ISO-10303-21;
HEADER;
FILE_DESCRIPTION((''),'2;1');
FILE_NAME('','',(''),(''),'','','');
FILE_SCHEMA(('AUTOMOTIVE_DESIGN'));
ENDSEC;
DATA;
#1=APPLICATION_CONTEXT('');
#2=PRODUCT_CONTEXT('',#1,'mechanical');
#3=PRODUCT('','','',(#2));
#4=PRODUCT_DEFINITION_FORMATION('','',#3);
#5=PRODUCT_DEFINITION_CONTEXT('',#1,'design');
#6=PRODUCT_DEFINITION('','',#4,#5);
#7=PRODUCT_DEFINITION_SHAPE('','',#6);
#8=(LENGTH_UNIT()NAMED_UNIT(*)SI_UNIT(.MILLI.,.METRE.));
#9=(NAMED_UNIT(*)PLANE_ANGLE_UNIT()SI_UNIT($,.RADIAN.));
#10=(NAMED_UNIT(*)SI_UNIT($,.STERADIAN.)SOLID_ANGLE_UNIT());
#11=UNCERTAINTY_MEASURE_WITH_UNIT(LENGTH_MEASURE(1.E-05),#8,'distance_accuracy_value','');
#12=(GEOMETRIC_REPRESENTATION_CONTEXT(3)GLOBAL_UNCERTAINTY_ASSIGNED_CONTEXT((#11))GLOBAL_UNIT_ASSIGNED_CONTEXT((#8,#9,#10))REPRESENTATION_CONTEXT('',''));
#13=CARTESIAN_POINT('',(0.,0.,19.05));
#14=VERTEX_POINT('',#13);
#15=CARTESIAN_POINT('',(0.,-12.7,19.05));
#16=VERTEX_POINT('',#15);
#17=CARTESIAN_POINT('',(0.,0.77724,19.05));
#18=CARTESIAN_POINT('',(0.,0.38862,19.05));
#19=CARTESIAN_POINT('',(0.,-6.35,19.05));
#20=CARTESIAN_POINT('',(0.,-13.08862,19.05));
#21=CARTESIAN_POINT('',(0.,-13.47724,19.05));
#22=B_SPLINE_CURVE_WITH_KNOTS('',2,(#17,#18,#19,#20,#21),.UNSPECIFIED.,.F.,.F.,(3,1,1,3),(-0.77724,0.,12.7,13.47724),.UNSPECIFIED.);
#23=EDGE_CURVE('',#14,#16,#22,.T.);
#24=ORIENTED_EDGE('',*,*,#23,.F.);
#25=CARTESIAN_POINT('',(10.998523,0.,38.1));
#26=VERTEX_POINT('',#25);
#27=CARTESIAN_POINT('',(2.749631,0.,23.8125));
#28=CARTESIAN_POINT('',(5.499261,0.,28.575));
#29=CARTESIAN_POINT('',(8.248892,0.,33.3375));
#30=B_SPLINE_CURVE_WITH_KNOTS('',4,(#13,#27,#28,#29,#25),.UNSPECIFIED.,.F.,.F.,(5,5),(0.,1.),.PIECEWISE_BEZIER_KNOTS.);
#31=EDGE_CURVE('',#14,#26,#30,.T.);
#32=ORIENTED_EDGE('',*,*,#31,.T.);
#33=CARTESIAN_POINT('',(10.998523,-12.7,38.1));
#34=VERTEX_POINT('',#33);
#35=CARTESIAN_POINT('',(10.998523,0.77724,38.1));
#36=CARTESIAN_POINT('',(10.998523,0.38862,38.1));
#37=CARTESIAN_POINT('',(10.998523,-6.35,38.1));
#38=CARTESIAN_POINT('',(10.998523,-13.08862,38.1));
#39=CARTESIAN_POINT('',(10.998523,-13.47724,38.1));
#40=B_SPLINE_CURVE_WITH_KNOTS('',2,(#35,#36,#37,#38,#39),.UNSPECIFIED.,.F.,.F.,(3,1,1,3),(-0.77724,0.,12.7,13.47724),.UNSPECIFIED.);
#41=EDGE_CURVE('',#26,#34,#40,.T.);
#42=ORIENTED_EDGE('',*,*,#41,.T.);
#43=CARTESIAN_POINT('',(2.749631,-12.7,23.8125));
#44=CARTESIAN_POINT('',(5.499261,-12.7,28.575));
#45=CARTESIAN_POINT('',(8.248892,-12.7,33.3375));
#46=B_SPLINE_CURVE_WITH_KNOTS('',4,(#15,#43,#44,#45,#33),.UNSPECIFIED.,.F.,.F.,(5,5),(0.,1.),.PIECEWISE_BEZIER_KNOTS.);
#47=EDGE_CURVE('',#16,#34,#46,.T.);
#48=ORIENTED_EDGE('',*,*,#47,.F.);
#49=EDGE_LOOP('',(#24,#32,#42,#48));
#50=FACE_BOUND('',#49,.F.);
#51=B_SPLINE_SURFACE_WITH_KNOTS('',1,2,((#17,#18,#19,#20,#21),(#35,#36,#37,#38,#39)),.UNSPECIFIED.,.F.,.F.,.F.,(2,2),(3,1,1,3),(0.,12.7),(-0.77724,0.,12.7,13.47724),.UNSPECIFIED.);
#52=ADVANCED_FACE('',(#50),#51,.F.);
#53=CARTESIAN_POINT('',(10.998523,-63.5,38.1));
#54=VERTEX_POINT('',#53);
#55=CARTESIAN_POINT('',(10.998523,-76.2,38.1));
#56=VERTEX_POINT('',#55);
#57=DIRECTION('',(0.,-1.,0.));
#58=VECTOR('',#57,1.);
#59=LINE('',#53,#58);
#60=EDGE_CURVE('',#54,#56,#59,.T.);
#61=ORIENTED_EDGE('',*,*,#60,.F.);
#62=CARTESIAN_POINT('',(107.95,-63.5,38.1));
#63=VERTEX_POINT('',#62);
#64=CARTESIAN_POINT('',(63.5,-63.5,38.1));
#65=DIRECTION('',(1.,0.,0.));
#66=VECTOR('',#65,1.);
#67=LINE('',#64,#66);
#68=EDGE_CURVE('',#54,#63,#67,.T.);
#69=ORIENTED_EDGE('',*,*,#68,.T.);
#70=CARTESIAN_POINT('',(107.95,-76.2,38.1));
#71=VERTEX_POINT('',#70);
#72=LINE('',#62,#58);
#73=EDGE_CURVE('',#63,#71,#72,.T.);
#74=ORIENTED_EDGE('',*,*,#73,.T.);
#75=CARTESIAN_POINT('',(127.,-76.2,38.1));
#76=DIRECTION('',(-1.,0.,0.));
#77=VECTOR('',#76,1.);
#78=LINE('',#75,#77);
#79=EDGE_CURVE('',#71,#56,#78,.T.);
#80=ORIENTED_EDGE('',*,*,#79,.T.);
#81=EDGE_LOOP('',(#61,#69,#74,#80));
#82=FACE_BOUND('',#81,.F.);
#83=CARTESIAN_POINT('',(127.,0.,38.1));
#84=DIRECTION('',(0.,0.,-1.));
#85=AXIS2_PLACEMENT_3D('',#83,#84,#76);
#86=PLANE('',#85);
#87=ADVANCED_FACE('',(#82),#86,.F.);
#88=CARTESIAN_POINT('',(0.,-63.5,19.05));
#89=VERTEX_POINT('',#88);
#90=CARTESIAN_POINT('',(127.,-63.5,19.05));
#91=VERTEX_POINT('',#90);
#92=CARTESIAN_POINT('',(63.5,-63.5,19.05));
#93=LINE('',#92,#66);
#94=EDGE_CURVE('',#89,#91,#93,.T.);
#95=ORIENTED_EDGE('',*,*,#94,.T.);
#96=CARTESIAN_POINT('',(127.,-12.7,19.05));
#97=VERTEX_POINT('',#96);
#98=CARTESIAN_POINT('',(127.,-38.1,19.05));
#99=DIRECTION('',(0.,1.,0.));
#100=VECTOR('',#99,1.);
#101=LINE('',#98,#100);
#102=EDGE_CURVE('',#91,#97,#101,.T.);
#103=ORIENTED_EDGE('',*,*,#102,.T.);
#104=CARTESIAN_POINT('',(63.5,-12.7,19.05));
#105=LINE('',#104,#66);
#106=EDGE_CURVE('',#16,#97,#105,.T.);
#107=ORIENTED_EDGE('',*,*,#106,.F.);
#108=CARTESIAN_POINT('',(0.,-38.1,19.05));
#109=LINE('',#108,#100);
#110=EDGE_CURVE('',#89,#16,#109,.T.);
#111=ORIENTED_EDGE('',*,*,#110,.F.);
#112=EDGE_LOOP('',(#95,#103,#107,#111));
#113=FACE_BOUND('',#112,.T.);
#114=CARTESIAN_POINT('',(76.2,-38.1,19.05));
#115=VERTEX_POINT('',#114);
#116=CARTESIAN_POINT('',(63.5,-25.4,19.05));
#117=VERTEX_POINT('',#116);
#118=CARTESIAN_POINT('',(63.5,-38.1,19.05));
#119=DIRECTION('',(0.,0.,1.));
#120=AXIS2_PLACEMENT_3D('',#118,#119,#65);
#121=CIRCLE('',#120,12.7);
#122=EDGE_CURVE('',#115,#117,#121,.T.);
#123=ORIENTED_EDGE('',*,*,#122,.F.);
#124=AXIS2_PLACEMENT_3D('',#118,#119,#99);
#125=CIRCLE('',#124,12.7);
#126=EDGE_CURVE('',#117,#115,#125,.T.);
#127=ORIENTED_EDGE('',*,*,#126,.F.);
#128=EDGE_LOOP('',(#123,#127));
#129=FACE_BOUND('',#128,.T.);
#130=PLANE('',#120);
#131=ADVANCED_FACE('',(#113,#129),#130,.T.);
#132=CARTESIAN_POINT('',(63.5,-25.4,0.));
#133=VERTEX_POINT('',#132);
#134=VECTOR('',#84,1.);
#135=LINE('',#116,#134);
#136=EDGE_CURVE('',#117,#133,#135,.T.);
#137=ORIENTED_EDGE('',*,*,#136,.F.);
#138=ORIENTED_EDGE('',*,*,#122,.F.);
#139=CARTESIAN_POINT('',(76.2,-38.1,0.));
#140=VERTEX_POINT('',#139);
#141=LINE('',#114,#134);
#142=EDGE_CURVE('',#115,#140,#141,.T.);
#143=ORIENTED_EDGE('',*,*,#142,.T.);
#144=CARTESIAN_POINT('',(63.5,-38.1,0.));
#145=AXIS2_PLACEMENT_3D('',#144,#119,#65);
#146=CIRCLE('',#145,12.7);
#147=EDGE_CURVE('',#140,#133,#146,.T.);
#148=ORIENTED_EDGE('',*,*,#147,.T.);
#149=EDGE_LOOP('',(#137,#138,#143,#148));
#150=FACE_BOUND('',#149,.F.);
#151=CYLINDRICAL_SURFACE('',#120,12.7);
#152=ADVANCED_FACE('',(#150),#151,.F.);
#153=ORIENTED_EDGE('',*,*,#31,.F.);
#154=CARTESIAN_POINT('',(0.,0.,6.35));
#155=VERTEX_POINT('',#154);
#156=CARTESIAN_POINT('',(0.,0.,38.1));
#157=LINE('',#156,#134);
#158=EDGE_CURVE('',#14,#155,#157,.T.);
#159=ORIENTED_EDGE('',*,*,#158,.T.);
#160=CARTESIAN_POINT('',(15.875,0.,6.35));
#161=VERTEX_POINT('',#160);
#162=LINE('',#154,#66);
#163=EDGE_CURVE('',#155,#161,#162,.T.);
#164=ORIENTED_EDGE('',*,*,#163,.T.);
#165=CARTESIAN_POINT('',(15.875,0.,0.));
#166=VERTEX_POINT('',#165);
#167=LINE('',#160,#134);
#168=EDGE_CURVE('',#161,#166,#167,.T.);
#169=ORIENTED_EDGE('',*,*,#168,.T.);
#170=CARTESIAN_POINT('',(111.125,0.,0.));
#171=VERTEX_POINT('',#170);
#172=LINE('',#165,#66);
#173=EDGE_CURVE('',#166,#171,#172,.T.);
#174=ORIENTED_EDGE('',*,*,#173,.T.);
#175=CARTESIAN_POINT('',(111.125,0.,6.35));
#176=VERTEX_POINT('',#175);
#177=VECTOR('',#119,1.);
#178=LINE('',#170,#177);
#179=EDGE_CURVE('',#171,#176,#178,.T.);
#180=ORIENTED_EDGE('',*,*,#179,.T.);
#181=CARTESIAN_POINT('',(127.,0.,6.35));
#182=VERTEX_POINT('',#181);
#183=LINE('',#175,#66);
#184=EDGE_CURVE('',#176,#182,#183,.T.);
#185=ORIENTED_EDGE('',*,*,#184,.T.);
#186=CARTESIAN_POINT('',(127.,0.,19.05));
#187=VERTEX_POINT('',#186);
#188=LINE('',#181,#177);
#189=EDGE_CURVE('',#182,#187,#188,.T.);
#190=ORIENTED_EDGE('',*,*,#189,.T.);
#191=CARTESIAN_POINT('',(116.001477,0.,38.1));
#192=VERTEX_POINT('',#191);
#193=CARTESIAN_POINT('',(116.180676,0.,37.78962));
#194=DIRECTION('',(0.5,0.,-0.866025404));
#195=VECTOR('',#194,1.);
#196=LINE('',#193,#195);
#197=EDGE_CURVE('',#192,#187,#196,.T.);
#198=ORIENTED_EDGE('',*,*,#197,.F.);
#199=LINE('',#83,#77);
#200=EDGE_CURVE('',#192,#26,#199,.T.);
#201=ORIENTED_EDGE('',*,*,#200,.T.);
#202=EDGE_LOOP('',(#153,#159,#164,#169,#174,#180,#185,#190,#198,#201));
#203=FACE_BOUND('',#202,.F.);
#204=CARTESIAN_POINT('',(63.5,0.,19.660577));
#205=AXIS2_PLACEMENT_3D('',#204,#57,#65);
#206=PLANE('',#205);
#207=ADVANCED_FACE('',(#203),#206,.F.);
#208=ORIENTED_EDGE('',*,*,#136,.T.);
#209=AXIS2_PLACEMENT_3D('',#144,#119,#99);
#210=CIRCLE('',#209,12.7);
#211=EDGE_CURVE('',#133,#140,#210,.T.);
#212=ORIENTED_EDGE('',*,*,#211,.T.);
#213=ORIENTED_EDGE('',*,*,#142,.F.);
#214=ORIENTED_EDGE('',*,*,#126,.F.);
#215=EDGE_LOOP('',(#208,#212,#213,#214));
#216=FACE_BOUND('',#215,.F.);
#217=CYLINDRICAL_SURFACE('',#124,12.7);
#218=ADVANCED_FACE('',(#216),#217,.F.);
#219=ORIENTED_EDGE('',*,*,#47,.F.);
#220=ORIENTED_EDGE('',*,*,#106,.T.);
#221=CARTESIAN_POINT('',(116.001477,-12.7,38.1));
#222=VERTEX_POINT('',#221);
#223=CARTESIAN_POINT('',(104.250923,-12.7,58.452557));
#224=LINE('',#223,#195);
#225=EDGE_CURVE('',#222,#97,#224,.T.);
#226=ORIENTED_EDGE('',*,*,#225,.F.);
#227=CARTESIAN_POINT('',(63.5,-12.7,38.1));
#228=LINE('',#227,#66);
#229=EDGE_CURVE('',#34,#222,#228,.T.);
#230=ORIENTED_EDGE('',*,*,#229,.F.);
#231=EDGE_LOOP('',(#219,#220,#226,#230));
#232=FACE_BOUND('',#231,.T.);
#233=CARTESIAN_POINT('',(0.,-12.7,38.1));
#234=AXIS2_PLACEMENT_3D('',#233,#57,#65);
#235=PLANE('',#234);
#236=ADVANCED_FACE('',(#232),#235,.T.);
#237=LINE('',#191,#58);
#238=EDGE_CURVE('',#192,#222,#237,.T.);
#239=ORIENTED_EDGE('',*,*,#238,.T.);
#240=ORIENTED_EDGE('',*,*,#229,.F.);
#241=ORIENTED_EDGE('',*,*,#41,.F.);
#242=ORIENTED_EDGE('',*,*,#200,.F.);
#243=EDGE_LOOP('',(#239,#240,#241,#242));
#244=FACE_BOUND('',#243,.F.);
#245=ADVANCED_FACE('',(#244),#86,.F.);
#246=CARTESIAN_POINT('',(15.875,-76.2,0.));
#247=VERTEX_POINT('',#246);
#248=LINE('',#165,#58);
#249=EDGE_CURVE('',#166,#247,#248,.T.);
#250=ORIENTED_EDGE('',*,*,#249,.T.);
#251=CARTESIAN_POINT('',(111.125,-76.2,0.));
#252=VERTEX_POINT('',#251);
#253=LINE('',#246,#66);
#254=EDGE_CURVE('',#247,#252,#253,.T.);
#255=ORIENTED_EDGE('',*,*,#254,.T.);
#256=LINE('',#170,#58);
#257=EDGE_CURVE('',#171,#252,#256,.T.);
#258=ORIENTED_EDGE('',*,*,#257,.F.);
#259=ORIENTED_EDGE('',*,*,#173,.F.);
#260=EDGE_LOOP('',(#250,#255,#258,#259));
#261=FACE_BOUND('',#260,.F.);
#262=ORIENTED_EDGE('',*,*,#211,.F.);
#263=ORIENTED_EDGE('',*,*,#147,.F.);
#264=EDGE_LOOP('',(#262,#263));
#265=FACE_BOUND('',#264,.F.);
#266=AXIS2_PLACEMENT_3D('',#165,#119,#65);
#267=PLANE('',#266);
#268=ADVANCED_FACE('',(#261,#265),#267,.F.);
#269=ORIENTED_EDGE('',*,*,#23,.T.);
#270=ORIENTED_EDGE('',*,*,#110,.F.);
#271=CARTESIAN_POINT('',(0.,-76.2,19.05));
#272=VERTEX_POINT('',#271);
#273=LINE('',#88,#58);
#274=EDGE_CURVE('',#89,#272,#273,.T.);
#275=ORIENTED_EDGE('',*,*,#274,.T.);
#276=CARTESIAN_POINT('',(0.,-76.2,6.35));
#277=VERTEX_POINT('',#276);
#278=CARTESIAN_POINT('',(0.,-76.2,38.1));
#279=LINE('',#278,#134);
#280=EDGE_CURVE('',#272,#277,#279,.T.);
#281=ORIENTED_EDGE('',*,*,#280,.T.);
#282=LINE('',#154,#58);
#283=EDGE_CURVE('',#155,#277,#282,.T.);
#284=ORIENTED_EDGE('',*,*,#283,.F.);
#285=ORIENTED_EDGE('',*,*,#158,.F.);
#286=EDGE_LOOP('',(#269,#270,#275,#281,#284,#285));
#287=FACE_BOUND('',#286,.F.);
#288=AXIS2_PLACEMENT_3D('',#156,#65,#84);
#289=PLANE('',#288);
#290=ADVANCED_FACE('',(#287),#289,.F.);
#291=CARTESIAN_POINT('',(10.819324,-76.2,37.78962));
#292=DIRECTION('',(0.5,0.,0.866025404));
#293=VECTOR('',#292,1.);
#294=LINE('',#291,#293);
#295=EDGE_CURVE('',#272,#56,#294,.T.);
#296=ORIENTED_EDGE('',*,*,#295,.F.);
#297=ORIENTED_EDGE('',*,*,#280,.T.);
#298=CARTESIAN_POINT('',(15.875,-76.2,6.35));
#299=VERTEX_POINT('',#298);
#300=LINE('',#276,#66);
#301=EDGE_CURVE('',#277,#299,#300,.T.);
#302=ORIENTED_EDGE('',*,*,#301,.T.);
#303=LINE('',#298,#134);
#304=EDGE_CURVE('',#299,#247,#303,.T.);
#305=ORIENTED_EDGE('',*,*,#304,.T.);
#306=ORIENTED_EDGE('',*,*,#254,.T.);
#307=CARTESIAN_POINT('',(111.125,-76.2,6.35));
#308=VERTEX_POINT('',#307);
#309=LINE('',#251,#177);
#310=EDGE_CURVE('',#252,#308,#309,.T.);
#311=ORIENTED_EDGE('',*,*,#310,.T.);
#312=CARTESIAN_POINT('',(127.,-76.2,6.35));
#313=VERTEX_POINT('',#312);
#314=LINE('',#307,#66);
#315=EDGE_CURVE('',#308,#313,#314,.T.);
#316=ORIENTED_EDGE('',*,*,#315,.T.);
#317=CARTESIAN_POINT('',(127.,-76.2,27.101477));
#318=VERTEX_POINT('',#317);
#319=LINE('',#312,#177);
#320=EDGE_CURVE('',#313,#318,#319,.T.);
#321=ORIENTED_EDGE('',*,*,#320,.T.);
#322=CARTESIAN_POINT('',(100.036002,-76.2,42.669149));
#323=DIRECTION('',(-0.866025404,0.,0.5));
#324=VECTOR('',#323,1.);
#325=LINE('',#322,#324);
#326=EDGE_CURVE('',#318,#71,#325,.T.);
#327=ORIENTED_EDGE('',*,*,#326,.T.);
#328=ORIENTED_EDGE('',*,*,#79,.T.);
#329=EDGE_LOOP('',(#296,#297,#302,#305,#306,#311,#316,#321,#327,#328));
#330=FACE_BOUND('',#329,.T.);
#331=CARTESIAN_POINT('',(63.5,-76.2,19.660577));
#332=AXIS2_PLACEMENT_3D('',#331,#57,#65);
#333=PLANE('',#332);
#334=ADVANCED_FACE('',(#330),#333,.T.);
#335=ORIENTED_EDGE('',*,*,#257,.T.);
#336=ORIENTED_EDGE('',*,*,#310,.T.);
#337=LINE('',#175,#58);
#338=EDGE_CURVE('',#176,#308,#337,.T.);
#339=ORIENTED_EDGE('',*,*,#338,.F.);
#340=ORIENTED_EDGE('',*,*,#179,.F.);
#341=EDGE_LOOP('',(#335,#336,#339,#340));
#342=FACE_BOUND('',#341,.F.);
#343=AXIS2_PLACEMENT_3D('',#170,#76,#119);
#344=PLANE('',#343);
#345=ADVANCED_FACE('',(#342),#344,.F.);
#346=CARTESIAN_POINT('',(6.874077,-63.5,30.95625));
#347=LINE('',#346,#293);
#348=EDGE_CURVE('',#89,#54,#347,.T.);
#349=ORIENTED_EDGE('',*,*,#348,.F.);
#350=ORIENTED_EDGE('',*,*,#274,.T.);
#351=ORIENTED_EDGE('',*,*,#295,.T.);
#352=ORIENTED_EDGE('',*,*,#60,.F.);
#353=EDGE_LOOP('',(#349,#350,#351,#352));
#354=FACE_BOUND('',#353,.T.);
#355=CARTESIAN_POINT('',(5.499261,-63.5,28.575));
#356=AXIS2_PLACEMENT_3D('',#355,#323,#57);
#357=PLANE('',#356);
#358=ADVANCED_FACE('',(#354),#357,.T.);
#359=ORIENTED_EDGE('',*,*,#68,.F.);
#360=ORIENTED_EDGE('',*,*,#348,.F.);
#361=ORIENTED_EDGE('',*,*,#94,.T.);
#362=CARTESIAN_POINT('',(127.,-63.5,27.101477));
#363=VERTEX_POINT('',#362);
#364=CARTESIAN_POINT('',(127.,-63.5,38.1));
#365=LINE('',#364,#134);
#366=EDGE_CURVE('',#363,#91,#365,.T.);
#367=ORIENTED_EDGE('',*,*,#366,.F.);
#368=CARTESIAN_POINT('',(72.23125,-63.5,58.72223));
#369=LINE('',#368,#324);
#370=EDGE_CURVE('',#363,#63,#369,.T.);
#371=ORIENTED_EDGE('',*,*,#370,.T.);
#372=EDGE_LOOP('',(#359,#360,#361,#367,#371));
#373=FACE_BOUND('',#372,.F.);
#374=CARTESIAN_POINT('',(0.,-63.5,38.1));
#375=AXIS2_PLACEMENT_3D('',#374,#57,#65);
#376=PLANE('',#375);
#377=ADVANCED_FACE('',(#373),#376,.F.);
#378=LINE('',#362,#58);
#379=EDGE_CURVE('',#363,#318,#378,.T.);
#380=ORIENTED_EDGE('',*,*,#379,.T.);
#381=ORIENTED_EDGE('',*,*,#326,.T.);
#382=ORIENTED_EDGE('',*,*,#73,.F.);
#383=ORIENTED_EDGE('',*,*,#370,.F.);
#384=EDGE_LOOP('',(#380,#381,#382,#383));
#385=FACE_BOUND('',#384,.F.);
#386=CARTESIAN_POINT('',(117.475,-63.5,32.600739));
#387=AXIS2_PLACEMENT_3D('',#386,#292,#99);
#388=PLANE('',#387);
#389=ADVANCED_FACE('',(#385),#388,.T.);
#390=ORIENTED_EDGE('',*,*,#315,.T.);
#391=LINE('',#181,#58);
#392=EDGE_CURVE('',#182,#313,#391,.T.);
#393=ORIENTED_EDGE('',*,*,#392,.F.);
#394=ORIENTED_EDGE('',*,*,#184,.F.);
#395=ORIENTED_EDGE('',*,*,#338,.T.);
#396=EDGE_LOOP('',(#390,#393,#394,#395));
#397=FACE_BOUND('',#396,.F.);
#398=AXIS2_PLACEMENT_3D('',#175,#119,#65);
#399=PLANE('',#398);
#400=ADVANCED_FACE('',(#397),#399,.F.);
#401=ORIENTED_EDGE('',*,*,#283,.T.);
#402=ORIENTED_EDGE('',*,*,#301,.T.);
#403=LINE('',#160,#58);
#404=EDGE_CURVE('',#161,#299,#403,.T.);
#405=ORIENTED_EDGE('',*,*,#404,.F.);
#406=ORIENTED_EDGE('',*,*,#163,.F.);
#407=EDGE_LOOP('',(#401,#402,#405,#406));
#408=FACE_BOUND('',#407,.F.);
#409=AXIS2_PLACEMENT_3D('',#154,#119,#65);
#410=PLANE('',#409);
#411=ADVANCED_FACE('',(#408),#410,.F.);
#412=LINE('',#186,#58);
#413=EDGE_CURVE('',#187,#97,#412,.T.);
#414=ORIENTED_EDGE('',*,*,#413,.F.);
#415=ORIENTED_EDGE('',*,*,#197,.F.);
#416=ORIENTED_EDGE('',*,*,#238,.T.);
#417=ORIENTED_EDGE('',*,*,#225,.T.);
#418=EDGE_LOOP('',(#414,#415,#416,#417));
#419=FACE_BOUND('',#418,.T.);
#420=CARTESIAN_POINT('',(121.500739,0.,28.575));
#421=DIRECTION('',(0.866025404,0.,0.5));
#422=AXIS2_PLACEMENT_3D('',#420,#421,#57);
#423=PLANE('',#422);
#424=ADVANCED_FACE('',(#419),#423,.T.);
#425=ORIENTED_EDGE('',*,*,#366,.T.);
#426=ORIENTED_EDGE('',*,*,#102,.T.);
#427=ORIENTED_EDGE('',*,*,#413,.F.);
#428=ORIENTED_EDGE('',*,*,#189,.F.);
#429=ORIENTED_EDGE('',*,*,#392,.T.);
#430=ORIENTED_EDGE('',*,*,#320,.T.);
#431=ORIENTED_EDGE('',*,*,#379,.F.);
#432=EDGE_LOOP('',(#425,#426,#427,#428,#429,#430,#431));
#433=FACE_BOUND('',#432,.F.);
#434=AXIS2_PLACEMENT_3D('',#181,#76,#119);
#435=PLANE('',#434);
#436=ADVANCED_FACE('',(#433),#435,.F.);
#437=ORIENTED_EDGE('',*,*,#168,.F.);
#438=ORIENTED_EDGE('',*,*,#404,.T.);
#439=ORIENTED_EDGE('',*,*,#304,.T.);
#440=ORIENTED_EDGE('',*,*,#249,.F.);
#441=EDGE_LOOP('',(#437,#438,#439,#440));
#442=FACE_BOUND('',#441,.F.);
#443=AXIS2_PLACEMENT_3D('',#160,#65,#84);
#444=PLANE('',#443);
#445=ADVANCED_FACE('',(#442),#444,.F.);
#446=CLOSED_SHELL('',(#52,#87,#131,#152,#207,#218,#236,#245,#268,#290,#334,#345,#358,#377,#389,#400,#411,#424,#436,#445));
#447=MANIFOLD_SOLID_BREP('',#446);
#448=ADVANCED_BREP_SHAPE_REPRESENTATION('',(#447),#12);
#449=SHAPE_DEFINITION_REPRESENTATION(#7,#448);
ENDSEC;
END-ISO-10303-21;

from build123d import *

# Parameters (mm, degrees)
F1_DEPTH    = 76.2
F2_W        = 127
F2_H        = 50.8
F3_DEPTH    = 19.05
F4_C1_SIZE2 = 10.9985226281
F4_C1_SIZE  = 19.05
F4_C2_SIZE2 = 10.9985226281
F4_C2_SIZE  = 19.05
F4_C3_SIZE2 = 19.05
F4_C3_SIZE  = 10.9985226281
F4_C4_SIZE2 = 19.05
F4_C4_SIZE  = 10.9985226281
F6_DEPTH    = 56.642


with BuildPart() as f1:
    # F0 (on Front) → F1 (new body)
    with BuildSketch(Plane.XZ):
        Polygon((15.875, 6.35), (15.875, 0), (111.125, 0), (111.125, 6.35), (127, 6.35), (127, 19.05), (127, 38.1), (0, 38.1), (0, 19.05), (0, 6.35), align=None)
    extrude(amount=F1_DEPTH)

    # F2 (on face) → F3 (cut)
    with BuildSketch(Plane.XY.offset(38.1)):
        with Locations((63.5, -38.1)):
            Rectangle(F2_W, F2_H)
    extrude(amount=-F3_DEPTH, mode=Mode.SUBTRACT)

    # F4: chamfer of 19.05 x 10.9985226281 on 4 edges, made by hand

    # F4_c1
    f4_c1_edges = [f1.edges().sort_by_distance(p)[0] for p in [
        (0, -69.85, 38.1),
    ]]
    f4_c1_side = f1.faces().sort_by_distance((0, -69.85, 37.8800295474))[0]
    chamfer(f4_c1_edges, length=F4_C1_SIZE, length2=F4_C1_SIZE2, reference=f4_c1_side)

    # F4_c2
    f4_c2_edges = [f1.edges().sort_by_distance(p)[0] for p in [
        (0, -6.35, 38.1),
    ]]
    f4_c2_side = f1.faces().sort_by_distance((0, -6.35, 37.8800295474))[0]
    chamfer(f4_c2_edges, length=F4_C2_SIZE, length2=F4_C2_SIZE2, reference=f4_c2_side)

    # F4_c3
    f4_c3_edges = [f1.edges().sort_by_distance(p)[0] for p in [
        (127, -6.35, 38.1),
    ]]
    f4_c3_side = f1.faces().sort_by_distance((126.7800295474, -6.35, 38.1))[0]
    chamfer(f4_c3_edges, length=F4_C3_SIZE, length2=F4_C3_SIZE2, reference=f4_c3_side)

    # F4_c4
    f4_c4_edges = [f1.edges().sort_by_distance(p)[0] for p in [
        (127, -69.85, 38.1),
    ]]
    f4_c4_side = f1.faces().sort_by_distance((127, -69.85, 37.8800295474))[0]
    chamfer(f4_c4_edges, length=F4_C4_SIZE, length2=F4_C4_SIZE2, reference=f4_c4_side)

    # F5 (on face) → F6 (cut)
    with BuildSketch(Plane.XY.offset(19.05)):
        with BuildLine():
            ThreePointArc((76.2, -38.1), (72.4802561211, -29.1197438789), (63.5, -25.4))
            ThreePointArc((63.5, -25.4), (54.5197438789, -47.0802561211), (76.2, -38.1))
        make_face()
    extrude(amount=-F6_DEPTH, mode=Mode.SUBTRACT)


solid = f1.part
